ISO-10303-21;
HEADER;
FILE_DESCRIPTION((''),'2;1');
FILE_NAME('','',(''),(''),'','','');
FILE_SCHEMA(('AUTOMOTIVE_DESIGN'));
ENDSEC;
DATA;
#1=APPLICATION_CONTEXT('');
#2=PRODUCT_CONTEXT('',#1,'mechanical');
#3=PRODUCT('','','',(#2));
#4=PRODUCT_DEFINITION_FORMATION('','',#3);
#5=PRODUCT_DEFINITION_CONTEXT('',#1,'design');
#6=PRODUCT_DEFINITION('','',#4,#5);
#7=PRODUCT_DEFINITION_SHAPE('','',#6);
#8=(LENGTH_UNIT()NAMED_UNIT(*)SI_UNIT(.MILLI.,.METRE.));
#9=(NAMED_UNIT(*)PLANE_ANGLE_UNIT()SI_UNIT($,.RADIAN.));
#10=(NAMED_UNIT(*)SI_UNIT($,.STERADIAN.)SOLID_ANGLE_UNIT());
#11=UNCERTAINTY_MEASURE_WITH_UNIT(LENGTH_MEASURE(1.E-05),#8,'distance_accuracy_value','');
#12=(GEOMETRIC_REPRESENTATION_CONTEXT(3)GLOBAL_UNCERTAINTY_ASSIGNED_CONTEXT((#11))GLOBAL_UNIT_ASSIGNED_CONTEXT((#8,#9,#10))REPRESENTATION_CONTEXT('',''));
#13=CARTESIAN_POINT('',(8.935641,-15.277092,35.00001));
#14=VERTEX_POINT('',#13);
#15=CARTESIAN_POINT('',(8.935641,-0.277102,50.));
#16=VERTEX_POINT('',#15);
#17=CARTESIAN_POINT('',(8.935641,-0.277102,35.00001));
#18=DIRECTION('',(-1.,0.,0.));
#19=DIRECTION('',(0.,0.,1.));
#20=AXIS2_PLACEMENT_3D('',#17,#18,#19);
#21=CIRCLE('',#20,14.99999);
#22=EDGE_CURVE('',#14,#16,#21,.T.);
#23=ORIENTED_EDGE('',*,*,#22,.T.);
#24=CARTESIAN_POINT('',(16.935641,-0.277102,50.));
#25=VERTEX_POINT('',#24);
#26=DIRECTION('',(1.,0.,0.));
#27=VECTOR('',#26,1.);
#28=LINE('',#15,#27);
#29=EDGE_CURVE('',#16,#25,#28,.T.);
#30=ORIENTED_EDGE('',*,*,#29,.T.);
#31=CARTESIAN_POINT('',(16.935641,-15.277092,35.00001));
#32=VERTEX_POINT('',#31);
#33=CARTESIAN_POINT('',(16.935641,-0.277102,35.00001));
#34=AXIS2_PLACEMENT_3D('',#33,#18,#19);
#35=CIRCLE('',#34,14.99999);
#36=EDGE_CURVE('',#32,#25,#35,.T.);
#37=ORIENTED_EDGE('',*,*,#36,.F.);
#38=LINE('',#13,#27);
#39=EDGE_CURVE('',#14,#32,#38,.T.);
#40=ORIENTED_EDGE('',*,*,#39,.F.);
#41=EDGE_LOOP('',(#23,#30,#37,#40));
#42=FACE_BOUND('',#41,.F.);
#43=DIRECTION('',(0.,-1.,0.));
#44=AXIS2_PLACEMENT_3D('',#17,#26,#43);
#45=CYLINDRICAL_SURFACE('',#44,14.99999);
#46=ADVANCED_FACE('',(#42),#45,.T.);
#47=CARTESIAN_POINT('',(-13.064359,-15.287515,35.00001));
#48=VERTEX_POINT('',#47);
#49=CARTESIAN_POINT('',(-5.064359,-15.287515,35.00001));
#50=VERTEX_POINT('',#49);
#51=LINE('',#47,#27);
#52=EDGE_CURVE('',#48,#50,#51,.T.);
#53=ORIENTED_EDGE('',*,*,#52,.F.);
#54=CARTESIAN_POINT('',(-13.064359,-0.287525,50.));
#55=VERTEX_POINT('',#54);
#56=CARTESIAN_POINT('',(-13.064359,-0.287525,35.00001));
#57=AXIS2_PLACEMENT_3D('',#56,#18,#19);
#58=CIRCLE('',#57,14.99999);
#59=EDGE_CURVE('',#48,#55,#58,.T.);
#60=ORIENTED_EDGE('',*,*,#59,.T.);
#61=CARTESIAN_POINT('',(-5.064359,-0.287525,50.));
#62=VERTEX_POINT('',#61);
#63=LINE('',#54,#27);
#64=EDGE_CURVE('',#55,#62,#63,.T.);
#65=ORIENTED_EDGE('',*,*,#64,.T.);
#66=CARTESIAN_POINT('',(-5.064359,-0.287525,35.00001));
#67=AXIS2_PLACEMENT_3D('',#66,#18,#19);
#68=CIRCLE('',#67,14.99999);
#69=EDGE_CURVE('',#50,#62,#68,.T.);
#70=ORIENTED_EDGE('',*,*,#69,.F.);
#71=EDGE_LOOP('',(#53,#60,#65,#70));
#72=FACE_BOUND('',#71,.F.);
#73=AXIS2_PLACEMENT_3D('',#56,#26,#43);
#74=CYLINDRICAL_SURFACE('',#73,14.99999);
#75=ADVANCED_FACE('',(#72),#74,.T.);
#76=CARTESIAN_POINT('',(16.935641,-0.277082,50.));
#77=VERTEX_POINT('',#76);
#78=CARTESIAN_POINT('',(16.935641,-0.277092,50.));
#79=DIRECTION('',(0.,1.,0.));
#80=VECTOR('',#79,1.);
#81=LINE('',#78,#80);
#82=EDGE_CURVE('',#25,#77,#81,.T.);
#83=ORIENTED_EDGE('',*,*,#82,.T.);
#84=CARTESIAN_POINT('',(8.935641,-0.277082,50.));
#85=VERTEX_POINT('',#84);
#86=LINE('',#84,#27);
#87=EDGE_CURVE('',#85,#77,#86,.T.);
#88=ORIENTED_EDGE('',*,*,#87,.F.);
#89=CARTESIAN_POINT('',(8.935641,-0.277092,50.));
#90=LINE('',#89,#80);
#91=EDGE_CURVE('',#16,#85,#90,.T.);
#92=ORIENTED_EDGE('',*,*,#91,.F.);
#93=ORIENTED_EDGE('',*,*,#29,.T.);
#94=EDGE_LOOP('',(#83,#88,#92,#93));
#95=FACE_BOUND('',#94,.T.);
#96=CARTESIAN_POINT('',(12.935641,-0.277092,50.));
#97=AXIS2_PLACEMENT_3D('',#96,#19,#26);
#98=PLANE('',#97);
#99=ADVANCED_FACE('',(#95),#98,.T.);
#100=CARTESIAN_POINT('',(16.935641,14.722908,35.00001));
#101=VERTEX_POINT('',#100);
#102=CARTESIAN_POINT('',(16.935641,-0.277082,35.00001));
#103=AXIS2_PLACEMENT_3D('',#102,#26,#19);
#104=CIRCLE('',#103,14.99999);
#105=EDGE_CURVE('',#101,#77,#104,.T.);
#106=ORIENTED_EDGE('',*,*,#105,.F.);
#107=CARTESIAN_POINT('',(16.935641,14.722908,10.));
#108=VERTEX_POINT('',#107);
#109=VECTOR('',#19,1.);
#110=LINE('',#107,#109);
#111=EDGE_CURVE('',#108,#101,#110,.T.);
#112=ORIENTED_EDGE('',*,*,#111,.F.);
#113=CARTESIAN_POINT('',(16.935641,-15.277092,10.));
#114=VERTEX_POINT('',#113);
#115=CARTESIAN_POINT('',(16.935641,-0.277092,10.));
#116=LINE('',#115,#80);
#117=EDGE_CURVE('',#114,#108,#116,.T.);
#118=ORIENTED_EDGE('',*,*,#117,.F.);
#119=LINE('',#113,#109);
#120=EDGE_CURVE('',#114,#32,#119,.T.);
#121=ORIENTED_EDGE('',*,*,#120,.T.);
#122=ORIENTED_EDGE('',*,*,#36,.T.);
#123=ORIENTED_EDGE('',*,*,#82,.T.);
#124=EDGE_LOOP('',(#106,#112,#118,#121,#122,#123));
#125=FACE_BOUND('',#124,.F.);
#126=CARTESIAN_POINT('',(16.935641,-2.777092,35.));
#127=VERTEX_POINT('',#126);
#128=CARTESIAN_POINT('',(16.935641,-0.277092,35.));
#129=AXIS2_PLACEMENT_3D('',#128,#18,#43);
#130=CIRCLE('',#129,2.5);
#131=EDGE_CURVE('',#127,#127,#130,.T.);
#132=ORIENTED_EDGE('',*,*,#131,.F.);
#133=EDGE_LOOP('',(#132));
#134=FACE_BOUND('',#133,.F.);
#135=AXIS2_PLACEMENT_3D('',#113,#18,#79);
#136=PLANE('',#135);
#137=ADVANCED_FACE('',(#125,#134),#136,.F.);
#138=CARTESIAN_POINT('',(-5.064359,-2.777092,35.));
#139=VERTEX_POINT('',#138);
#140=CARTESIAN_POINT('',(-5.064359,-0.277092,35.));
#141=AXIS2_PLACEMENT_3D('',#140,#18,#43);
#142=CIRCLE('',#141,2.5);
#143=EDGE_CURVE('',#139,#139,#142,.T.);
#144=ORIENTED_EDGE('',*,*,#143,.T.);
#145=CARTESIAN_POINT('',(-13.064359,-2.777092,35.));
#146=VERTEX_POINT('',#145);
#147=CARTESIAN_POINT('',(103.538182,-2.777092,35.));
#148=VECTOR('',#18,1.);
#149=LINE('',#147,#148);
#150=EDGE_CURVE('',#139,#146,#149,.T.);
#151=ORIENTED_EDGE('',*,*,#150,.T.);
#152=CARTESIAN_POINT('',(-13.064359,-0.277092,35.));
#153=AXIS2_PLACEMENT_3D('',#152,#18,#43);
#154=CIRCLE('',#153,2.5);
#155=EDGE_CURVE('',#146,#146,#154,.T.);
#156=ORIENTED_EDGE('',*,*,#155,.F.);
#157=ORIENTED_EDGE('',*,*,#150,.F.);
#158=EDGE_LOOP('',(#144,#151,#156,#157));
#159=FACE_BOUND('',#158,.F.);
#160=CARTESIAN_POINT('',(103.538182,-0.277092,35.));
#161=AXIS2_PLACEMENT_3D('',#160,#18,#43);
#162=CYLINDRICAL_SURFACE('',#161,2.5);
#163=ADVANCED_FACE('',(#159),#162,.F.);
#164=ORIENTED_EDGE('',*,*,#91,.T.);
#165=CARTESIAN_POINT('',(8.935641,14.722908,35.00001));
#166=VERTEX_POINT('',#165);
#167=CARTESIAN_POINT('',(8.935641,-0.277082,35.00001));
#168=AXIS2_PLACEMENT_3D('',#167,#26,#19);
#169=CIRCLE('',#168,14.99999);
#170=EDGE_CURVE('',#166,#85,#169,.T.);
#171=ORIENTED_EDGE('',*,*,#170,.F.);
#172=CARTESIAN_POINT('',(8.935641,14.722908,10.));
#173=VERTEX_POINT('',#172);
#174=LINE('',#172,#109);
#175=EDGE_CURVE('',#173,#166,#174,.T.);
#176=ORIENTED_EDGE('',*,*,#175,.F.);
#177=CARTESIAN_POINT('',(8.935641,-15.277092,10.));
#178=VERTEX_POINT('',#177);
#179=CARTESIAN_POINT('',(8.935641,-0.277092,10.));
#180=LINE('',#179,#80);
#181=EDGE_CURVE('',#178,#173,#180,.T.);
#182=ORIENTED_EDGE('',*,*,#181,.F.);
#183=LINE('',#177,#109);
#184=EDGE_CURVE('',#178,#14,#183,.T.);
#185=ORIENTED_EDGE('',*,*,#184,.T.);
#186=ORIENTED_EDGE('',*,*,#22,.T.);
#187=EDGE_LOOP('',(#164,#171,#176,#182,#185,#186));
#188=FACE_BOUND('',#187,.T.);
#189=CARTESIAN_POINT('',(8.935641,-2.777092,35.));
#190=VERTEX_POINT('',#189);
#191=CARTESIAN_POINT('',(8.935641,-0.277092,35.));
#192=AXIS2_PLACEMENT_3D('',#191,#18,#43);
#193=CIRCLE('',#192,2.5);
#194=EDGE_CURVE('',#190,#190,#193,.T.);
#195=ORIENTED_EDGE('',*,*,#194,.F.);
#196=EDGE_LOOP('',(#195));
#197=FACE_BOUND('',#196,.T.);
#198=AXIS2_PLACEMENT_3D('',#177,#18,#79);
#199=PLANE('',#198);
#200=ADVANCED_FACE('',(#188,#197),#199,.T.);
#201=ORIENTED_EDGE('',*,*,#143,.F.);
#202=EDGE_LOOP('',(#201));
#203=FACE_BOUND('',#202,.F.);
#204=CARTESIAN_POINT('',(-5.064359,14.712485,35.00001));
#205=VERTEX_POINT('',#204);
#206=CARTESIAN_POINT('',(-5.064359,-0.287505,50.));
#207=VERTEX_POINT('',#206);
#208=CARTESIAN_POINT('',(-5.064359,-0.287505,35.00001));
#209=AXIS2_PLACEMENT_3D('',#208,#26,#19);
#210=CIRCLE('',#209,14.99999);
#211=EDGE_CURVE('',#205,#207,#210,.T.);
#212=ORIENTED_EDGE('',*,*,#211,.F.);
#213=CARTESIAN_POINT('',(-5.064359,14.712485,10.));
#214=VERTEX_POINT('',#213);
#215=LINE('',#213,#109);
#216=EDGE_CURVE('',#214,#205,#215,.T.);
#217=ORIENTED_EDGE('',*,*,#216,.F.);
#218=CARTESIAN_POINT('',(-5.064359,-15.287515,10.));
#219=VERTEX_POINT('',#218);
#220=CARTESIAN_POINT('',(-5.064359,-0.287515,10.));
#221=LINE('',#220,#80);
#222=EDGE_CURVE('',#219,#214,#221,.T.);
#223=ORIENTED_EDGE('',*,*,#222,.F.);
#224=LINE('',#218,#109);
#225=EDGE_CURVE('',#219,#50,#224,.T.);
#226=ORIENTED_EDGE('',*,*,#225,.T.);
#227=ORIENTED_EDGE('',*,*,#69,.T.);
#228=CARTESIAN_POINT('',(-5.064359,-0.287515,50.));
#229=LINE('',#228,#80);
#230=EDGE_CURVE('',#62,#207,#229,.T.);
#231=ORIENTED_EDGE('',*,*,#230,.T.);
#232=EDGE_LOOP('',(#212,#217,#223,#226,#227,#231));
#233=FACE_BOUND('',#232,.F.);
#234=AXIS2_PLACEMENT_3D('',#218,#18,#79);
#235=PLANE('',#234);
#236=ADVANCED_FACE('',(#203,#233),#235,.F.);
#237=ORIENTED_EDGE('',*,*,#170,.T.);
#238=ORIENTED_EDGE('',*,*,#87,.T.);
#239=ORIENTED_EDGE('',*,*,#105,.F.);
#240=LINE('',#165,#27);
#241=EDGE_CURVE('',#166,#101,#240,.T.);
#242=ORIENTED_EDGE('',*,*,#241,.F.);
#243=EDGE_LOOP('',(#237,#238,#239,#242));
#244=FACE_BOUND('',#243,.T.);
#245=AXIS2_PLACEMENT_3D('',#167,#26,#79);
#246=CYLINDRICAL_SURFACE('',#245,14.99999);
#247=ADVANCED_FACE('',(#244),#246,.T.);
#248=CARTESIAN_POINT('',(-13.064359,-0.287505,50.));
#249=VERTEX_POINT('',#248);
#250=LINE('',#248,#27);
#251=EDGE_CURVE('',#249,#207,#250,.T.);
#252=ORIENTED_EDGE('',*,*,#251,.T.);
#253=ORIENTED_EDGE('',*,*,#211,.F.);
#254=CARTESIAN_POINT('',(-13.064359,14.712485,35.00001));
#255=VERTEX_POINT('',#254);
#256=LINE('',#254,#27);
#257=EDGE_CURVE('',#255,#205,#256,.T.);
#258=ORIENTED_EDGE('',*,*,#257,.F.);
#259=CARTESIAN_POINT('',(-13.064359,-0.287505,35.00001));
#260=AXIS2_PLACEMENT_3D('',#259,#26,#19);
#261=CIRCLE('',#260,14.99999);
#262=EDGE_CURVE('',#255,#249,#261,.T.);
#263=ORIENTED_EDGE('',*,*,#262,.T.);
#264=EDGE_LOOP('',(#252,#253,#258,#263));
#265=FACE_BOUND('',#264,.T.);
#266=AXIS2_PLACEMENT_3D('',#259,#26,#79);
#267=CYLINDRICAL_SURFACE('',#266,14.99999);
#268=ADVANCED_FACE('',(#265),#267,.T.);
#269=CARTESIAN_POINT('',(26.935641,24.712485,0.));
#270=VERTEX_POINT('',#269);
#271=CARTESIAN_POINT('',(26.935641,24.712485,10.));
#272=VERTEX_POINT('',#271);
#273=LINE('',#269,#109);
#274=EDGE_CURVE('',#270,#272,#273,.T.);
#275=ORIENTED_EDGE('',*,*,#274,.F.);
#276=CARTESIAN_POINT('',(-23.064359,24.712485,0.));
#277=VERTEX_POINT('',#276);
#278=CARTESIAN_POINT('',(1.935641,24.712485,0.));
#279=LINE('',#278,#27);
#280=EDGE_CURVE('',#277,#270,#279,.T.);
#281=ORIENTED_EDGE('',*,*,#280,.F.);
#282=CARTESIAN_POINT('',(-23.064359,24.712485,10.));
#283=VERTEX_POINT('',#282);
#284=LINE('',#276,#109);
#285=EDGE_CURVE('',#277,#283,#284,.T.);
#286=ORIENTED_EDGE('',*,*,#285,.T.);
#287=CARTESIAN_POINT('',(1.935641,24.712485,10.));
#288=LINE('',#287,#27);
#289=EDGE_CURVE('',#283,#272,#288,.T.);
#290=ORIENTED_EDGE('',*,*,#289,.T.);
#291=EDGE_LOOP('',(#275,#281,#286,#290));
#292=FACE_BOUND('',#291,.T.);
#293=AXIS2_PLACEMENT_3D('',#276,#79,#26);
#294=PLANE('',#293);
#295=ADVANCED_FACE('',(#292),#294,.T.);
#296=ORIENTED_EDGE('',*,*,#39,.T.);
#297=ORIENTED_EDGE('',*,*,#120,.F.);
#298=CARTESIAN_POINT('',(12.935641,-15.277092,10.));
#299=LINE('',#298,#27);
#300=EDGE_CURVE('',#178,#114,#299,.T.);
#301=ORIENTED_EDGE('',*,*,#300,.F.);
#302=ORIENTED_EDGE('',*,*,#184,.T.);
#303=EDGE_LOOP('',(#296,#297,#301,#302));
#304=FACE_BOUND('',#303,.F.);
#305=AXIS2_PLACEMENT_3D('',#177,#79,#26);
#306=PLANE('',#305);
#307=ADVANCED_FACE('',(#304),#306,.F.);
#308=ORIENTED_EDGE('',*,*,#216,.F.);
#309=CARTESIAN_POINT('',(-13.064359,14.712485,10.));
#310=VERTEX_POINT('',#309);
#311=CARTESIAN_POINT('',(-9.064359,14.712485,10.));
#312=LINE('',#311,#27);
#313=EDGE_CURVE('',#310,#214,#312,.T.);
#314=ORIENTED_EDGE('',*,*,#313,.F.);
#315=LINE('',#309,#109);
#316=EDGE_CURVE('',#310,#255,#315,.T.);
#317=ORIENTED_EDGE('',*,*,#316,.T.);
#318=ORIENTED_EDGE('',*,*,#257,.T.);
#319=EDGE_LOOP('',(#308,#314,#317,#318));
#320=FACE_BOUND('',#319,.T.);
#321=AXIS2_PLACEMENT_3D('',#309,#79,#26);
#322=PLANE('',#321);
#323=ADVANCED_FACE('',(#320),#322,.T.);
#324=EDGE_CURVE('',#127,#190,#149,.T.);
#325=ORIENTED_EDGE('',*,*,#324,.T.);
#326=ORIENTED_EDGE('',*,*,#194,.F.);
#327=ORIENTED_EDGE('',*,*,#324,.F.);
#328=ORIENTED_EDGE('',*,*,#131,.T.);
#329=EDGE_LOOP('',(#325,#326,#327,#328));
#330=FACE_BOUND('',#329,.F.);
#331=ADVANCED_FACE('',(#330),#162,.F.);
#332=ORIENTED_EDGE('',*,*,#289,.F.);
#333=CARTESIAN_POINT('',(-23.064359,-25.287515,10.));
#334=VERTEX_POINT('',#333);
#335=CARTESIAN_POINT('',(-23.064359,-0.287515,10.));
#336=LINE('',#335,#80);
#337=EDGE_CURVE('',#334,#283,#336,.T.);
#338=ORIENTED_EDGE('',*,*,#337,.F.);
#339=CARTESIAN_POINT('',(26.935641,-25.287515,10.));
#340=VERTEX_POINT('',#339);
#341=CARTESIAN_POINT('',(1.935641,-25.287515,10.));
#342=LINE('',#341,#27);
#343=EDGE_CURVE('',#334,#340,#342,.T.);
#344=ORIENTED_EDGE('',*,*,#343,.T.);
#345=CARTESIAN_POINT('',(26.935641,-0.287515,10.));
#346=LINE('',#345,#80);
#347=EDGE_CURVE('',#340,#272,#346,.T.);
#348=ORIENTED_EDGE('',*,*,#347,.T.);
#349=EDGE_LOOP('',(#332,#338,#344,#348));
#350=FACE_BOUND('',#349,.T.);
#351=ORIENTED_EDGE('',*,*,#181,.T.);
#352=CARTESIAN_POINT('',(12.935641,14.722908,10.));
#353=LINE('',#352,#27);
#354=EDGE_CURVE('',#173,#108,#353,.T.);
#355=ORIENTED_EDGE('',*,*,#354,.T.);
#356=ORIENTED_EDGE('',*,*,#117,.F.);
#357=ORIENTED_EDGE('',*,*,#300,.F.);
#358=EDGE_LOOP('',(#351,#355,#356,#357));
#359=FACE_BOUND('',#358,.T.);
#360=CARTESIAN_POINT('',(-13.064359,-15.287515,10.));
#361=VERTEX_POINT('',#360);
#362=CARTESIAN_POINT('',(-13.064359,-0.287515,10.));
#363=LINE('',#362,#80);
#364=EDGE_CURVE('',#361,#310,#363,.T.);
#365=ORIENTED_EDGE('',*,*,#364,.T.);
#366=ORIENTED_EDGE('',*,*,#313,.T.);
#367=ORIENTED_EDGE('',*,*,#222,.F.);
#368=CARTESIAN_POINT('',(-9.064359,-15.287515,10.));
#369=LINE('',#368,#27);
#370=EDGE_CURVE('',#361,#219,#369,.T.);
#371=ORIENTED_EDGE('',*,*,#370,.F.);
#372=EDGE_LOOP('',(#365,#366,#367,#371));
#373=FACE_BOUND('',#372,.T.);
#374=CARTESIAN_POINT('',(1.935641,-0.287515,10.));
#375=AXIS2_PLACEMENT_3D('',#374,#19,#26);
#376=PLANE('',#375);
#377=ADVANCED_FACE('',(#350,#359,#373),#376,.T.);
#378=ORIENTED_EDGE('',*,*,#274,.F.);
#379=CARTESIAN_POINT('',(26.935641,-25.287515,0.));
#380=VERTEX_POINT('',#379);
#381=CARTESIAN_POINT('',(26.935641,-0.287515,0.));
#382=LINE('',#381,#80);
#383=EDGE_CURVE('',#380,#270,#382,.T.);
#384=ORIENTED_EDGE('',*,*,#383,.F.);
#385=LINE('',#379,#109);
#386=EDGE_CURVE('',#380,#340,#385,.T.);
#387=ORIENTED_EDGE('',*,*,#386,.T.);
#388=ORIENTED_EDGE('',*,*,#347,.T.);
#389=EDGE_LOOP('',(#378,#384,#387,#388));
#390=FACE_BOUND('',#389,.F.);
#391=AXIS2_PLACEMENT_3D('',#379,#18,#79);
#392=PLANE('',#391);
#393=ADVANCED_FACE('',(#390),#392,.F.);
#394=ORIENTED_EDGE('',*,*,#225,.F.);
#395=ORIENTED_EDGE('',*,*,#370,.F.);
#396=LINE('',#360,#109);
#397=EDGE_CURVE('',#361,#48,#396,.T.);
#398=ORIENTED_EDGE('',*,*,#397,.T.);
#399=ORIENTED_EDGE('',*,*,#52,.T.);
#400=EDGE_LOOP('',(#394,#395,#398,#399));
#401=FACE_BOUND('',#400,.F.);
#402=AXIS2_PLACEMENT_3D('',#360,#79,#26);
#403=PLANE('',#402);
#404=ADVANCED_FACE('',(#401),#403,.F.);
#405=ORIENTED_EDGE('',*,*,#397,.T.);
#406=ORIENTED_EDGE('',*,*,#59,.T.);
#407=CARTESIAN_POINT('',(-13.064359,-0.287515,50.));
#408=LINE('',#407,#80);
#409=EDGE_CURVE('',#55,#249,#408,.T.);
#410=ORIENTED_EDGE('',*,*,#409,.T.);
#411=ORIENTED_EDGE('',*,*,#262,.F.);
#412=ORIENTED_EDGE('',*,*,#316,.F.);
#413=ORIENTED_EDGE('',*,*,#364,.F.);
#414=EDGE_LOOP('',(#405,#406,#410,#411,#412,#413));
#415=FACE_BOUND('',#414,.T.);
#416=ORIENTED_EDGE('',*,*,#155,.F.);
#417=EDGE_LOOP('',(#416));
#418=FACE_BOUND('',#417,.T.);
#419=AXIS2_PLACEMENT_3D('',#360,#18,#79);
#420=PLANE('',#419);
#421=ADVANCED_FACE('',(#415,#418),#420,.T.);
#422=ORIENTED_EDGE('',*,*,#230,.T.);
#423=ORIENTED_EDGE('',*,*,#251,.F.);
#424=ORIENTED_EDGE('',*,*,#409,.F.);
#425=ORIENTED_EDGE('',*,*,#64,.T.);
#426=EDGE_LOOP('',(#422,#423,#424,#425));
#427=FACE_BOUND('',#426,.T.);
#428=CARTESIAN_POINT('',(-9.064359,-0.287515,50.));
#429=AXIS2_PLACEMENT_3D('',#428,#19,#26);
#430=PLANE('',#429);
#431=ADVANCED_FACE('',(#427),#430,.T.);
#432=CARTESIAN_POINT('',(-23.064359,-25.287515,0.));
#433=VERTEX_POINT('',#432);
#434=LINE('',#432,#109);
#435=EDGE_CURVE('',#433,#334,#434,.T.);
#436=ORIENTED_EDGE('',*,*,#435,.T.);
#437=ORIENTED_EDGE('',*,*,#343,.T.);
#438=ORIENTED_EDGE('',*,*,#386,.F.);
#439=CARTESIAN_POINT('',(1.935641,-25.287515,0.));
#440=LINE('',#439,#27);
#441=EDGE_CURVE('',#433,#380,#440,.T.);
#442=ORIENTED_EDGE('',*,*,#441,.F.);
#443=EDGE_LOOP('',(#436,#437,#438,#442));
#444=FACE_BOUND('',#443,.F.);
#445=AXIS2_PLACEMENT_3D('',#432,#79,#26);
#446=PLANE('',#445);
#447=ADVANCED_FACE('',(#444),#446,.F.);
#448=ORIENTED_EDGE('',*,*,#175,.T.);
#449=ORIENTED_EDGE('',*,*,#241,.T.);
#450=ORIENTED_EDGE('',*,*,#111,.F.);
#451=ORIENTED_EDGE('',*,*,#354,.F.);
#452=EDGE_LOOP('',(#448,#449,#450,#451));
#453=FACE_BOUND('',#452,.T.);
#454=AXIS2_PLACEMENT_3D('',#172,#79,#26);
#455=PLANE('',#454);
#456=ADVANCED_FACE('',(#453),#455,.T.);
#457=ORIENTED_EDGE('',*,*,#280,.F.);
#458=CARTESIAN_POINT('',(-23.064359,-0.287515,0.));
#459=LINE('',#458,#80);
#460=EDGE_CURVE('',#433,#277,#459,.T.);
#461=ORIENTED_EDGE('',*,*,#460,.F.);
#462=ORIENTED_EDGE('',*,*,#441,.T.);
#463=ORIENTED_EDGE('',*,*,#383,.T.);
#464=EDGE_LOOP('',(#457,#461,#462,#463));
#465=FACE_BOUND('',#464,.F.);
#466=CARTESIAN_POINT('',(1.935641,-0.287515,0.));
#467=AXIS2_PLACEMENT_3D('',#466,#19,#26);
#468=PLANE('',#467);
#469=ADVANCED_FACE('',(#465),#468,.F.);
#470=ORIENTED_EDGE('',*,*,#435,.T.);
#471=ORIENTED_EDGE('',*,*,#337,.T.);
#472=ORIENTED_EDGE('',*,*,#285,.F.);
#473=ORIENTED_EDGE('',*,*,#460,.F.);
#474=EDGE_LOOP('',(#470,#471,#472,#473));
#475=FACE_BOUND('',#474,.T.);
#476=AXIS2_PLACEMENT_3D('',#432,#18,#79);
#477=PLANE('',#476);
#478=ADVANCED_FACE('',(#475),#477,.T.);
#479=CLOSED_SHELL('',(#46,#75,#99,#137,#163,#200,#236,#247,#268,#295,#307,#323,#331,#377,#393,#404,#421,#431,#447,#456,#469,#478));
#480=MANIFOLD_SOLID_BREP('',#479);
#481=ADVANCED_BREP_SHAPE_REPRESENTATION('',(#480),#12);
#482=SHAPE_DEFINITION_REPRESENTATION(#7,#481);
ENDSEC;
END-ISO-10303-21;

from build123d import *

# Parameters (mm, degrees)
F0_W     = 50
F0_H     = 50
F1_DEPTH = 10
F2_W     = 8
F2_H     = 30
F3_DEPTH = 40
F4_R     = 14.99999
F6_D     = 5


# Not quite as in the source:
# - a fillet or chamfer is up to 0.001 mm smaller than in the source, because OpenCascade refuses the exact size


with BuildPart() as f1:
    # F0 (on Top) → F1 (new body)
    with BuildSketch(Plane.XY):
        with Locations((1.9356412813, -0.2875153496)):
            Rectangle(F0_W, F0_H)
    extrude(amount=F1_DEPTH)

    # F2 (on face) → F3 (join)
    with BuildSketch(Plane.XY.offset(10)):
        with Locations((-9.0643587187, -0.2875153496)):
            Rectangle(F2_W, F2_H)
        with Locations((12.9356412813, -0.2770923451)):
            Rectangle(F2_W, F2_H)
    extrude(amount=F3_DEPTH)

    # F4 (radius 15 in the source; OpenCascade refuses exactly that, so slightly less here)
    f4_edges = [f1.edges().sort_by_distance(p)[0] for p in [
        (-9.064359, 14.712485, 50),
        (-9.064359, -15.287515, 50),
        (12.935641, 14.722908, 50),
        (12.935641, -15.277092, 50),
    ]]
    fillet(f4_edges, radius=F4_R)

    # F6 (through all)
    with Locations(Plane.YZ.offset(16.9356412813)):
        with Locations((-0.2770923451, 35)):
            Hole(F6_D / 2)


solid = f1.part
